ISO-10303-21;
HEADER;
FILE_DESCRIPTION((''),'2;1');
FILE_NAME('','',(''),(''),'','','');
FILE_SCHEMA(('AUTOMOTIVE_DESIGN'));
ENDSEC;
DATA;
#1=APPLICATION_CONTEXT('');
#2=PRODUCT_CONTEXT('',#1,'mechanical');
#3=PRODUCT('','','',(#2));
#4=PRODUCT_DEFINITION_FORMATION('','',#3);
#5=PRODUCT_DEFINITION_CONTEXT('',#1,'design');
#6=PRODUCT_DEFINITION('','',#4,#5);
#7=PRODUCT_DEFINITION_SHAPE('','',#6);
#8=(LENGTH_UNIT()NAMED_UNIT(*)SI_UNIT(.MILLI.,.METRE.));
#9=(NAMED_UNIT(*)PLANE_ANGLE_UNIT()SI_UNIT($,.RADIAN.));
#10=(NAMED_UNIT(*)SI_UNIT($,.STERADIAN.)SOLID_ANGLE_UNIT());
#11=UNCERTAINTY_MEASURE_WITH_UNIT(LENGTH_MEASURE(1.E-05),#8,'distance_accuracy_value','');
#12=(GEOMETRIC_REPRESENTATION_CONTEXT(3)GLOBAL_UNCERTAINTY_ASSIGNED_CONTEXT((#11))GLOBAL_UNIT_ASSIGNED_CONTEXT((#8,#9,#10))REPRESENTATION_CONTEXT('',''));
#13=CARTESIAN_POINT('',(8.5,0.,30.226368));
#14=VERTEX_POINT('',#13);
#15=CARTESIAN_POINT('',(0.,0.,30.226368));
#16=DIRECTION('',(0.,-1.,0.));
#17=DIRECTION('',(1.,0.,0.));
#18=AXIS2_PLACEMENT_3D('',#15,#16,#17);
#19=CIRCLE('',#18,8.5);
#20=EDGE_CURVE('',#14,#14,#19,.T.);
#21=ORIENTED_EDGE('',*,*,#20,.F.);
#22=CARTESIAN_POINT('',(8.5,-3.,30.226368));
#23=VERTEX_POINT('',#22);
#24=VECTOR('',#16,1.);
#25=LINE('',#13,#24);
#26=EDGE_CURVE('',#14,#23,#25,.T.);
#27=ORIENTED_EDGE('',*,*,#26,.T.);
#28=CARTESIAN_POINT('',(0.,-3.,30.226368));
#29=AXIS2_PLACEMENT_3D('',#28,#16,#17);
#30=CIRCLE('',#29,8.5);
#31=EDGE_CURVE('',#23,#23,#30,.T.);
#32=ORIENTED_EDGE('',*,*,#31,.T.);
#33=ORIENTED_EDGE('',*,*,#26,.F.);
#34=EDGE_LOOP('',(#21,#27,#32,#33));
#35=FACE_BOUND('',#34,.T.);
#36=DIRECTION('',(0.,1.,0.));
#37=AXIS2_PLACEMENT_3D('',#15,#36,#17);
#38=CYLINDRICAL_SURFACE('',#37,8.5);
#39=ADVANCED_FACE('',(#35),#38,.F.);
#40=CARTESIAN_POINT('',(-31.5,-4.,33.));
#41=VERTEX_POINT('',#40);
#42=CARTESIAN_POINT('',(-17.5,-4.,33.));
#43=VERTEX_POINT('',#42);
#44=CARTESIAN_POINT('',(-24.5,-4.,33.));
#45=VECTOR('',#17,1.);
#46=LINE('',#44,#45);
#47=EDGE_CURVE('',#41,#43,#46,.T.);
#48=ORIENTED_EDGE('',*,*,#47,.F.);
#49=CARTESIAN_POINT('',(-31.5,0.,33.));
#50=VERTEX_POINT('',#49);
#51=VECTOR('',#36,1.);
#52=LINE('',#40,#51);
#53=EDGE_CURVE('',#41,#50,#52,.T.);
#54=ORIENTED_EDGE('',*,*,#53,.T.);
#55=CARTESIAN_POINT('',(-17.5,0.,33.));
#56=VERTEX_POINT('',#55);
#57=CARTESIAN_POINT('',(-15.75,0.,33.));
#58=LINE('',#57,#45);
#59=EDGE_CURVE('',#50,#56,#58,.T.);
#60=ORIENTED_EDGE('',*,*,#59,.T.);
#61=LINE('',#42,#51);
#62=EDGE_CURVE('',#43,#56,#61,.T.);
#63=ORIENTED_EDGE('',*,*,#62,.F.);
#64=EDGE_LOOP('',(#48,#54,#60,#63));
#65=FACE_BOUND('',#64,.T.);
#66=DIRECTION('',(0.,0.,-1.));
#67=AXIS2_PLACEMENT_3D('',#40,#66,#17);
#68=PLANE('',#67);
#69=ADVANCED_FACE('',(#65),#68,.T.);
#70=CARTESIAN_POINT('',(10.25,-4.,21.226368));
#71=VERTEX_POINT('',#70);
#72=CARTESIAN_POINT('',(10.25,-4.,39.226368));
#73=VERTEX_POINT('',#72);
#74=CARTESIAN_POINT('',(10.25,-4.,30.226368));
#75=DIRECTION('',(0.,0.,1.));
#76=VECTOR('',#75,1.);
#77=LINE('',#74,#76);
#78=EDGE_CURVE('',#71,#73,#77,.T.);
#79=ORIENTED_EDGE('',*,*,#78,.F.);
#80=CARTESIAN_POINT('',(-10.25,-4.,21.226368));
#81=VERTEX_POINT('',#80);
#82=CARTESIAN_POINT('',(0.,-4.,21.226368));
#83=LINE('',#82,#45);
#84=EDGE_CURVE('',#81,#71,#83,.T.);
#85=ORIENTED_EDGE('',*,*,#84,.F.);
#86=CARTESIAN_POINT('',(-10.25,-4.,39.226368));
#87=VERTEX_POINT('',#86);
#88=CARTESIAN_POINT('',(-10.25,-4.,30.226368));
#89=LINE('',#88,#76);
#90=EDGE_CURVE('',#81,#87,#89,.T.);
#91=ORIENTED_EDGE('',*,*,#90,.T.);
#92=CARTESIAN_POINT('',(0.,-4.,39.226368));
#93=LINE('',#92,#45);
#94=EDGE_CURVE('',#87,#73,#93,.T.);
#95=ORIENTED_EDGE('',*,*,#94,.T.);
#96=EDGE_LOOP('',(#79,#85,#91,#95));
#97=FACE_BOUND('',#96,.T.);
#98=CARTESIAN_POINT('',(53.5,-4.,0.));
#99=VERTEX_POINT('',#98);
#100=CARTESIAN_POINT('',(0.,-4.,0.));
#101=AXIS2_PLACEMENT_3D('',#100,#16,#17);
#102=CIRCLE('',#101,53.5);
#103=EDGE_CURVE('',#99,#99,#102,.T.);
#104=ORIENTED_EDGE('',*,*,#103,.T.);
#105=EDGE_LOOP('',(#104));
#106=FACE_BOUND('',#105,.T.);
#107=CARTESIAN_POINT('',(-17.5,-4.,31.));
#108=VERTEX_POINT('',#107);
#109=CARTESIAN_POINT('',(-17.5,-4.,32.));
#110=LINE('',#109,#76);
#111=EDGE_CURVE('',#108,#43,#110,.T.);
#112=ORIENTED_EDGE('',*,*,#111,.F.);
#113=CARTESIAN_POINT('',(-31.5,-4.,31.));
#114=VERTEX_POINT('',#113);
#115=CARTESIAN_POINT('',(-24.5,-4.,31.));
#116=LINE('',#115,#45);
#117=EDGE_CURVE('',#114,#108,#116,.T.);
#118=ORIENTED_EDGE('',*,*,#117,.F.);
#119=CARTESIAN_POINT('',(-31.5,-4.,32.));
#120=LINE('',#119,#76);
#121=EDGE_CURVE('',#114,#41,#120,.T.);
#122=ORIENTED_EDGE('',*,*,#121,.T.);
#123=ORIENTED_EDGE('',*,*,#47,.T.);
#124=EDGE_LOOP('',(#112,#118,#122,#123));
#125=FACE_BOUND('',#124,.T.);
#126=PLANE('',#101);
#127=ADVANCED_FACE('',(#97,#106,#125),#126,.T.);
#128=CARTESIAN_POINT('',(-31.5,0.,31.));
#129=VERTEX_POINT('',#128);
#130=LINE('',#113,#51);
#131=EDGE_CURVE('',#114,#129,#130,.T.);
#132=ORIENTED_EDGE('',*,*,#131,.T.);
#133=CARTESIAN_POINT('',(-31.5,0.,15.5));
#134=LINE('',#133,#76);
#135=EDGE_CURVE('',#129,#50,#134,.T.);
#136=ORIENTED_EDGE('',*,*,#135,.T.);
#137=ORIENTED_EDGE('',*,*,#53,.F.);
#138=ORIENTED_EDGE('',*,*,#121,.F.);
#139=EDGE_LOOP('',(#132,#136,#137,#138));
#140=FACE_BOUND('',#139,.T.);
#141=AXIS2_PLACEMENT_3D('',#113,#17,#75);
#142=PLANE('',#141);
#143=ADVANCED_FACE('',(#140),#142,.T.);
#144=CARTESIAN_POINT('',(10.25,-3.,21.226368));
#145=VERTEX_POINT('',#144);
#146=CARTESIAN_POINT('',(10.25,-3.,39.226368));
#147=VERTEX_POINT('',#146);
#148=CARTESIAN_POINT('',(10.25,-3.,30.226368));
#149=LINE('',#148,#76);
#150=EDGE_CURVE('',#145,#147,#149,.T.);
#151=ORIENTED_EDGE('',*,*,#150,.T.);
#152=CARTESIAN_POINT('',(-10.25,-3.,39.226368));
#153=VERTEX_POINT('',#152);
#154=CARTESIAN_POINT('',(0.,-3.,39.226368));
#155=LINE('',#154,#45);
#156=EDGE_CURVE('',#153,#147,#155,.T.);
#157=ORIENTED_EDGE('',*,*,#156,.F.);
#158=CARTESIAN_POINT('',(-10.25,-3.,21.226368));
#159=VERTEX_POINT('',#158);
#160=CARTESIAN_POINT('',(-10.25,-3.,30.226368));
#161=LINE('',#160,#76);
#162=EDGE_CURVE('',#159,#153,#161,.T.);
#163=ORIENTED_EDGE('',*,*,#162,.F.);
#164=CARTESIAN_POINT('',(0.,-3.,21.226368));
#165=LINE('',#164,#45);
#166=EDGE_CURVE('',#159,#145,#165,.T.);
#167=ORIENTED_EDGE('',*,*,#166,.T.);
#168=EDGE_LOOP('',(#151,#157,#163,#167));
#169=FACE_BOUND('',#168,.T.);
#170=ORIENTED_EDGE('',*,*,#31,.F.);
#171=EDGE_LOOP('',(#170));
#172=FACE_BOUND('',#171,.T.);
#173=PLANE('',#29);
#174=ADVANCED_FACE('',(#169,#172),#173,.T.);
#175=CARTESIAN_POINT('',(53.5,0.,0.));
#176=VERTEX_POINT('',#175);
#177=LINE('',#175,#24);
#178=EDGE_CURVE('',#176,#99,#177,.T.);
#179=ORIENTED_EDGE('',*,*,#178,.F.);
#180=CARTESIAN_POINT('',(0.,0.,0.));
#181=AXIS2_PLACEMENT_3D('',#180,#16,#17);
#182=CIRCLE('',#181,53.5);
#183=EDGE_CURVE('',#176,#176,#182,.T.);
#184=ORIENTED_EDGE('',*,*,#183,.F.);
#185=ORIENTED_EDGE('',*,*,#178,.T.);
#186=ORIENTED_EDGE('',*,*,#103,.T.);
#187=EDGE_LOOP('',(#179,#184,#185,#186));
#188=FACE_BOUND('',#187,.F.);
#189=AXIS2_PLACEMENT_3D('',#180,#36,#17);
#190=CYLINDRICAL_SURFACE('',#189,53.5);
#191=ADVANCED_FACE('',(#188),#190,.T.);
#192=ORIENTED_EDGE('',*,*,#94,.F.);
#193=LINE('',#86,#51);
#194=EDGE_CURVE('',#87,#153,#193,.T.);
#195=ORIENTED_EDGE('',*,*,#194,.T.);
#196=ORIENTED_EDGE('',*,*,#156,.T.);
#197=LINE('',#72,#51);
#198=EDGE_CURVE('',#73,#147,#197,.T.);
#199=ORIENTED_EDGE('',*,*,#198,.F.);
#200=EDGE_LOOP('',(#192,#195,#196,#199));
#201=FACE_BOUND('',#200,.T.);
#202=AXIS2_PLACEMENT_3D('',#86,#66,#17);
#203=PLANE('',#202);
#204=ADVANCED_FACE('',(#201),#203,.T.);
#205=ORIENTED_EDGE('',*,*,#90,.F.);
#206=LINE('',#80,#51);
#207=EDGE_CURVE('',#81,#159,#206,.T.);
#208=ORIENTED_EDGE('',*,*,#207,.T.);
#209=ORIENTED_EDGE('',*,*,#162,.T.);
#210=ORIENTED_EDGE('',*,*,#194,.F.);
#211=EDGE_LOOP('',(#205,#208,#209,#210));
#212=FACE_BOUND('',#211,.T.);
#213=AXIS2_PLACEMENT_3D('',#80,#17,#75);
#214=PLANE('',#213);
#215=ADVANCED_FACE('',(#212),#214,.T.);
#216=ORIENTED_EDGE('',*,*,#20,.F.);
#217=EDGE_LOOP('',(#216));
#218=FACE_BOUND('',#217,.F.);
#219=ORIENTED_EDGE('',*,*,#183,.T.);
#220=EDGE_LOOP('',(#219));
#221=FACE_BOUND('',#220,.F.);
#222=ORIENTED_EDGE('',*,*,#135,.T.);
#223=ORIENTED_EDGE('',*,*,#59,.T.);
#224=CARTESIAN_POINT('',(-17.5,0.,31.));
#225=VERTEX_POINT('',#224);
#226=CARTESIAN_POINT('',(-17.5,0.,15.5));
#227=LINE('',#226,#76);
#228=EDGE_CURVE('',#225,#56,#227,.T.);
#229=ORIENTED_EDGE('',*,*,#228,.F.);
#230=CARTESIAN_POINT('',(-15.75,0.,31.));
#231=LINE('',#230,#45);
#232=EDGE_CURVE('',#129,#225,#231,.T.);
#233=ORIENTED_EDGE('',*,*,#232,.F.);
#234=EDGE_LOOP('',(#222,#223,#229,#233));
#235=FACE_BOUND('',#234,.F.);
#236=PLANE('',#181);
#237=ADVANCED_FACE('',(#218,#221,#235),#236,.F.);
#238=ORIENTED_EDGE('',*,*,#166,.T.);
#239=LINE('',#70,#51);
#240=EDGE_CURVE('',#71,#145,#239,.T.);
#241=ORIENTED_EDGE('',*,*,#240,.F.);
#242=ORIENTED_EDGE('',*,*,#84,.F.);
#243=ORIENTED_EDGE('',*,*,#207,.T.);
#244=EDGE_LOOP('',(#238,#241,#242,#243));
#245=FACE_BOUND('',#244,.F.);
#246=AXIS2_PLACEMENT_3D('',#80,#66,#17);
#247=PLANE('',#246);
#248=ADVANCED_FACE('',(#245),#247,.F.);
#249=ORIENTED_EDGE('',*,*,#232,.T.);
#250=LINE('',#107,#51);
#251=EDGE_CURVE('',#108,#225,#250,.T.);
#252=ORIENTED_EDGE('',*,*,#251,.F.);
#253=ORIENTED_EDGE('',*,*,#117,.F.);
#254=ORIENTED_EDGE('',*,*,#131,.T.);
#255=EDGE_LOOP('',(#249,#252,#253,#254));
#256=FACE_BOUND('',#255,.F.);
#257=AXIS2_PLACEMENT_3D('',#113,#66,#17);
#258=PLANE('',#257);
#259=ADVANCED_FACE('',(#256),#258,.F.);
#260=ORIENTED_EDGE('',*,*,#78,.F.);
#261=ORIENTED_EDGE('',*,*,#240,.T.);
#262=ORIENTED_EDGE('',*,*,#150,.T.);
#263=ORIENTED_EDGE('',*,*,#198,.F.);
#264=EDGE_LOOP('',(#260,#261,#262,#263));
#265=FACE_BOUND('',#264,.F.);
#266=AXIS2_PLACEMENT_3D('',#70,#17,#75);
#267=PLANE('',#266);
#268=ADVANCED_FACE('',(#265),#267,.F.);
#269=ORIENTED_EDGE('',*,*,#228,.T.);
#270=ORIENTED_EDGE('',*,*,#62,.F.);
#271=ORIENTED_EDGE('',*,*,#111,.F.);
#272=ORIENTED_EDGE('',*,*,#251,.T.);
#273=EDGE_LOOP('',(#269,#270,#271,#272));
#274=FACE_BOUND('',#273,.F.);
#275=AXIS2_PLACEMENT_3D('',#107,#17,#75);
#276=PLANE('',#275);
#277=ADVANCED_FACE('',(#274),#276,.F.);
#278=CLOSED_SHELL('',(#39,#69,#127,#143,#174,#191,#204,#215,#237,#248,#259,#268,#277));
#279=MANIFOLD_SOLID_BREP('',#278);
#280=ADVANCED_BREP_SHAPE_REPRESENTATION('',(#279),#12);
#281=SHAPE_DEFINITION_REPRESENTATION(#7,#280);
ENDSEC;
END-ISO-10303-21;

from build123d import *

# Parameters (mm, degrees)
F0_R     = 53.5
F0_R_2   = 8.5
F1_DEPTH = 4
F2_W     = 20.5
F2_H     = 18
F2_R     = 8.5
F3_DEPTH = 1
F4_W     = 14
F4_H     = 2
F5_DEPTH = 25


# Not quite as in the source:
# - a feature names something its author has since deleted; it is built from what else it names


with BuildPart() as f1:
    # F0 (on Front) → F1 (new body)
    with BuildSketch(Plane.XZ):
        Circle(F0_R)
        with Locations((0, 30.2263684571)):
            Circle(F0_R_2, mode=Mode.SUBTRACT)
    extrude(amount=F1_DEPTH)

    # F2 (on face) → F3 (cut)
    with BuildSketch(Plane.XZ.offset(4)):
        with Locations((0, 30.2263684571)):
            Rectangle(F2_W, F2_H)
        with Locations((0, 30.2263684571)):
            Circle(F2_R, mode=Mode.SUBTRACT)
    extrude(amount=-F3_DEPTH, mode=Mode.SUBTRACT)

    # F4 (on face) → F5 (cut)
    with BuildSketch(Plane.XZ.offset(4)):
        with Locations((-24.5, 32)):
            Rectangle(F4_W, F4_H)
    extrude(amount=-F5_DEPTH, mode=Mode.SUBTRACT)


solid = f1.part
